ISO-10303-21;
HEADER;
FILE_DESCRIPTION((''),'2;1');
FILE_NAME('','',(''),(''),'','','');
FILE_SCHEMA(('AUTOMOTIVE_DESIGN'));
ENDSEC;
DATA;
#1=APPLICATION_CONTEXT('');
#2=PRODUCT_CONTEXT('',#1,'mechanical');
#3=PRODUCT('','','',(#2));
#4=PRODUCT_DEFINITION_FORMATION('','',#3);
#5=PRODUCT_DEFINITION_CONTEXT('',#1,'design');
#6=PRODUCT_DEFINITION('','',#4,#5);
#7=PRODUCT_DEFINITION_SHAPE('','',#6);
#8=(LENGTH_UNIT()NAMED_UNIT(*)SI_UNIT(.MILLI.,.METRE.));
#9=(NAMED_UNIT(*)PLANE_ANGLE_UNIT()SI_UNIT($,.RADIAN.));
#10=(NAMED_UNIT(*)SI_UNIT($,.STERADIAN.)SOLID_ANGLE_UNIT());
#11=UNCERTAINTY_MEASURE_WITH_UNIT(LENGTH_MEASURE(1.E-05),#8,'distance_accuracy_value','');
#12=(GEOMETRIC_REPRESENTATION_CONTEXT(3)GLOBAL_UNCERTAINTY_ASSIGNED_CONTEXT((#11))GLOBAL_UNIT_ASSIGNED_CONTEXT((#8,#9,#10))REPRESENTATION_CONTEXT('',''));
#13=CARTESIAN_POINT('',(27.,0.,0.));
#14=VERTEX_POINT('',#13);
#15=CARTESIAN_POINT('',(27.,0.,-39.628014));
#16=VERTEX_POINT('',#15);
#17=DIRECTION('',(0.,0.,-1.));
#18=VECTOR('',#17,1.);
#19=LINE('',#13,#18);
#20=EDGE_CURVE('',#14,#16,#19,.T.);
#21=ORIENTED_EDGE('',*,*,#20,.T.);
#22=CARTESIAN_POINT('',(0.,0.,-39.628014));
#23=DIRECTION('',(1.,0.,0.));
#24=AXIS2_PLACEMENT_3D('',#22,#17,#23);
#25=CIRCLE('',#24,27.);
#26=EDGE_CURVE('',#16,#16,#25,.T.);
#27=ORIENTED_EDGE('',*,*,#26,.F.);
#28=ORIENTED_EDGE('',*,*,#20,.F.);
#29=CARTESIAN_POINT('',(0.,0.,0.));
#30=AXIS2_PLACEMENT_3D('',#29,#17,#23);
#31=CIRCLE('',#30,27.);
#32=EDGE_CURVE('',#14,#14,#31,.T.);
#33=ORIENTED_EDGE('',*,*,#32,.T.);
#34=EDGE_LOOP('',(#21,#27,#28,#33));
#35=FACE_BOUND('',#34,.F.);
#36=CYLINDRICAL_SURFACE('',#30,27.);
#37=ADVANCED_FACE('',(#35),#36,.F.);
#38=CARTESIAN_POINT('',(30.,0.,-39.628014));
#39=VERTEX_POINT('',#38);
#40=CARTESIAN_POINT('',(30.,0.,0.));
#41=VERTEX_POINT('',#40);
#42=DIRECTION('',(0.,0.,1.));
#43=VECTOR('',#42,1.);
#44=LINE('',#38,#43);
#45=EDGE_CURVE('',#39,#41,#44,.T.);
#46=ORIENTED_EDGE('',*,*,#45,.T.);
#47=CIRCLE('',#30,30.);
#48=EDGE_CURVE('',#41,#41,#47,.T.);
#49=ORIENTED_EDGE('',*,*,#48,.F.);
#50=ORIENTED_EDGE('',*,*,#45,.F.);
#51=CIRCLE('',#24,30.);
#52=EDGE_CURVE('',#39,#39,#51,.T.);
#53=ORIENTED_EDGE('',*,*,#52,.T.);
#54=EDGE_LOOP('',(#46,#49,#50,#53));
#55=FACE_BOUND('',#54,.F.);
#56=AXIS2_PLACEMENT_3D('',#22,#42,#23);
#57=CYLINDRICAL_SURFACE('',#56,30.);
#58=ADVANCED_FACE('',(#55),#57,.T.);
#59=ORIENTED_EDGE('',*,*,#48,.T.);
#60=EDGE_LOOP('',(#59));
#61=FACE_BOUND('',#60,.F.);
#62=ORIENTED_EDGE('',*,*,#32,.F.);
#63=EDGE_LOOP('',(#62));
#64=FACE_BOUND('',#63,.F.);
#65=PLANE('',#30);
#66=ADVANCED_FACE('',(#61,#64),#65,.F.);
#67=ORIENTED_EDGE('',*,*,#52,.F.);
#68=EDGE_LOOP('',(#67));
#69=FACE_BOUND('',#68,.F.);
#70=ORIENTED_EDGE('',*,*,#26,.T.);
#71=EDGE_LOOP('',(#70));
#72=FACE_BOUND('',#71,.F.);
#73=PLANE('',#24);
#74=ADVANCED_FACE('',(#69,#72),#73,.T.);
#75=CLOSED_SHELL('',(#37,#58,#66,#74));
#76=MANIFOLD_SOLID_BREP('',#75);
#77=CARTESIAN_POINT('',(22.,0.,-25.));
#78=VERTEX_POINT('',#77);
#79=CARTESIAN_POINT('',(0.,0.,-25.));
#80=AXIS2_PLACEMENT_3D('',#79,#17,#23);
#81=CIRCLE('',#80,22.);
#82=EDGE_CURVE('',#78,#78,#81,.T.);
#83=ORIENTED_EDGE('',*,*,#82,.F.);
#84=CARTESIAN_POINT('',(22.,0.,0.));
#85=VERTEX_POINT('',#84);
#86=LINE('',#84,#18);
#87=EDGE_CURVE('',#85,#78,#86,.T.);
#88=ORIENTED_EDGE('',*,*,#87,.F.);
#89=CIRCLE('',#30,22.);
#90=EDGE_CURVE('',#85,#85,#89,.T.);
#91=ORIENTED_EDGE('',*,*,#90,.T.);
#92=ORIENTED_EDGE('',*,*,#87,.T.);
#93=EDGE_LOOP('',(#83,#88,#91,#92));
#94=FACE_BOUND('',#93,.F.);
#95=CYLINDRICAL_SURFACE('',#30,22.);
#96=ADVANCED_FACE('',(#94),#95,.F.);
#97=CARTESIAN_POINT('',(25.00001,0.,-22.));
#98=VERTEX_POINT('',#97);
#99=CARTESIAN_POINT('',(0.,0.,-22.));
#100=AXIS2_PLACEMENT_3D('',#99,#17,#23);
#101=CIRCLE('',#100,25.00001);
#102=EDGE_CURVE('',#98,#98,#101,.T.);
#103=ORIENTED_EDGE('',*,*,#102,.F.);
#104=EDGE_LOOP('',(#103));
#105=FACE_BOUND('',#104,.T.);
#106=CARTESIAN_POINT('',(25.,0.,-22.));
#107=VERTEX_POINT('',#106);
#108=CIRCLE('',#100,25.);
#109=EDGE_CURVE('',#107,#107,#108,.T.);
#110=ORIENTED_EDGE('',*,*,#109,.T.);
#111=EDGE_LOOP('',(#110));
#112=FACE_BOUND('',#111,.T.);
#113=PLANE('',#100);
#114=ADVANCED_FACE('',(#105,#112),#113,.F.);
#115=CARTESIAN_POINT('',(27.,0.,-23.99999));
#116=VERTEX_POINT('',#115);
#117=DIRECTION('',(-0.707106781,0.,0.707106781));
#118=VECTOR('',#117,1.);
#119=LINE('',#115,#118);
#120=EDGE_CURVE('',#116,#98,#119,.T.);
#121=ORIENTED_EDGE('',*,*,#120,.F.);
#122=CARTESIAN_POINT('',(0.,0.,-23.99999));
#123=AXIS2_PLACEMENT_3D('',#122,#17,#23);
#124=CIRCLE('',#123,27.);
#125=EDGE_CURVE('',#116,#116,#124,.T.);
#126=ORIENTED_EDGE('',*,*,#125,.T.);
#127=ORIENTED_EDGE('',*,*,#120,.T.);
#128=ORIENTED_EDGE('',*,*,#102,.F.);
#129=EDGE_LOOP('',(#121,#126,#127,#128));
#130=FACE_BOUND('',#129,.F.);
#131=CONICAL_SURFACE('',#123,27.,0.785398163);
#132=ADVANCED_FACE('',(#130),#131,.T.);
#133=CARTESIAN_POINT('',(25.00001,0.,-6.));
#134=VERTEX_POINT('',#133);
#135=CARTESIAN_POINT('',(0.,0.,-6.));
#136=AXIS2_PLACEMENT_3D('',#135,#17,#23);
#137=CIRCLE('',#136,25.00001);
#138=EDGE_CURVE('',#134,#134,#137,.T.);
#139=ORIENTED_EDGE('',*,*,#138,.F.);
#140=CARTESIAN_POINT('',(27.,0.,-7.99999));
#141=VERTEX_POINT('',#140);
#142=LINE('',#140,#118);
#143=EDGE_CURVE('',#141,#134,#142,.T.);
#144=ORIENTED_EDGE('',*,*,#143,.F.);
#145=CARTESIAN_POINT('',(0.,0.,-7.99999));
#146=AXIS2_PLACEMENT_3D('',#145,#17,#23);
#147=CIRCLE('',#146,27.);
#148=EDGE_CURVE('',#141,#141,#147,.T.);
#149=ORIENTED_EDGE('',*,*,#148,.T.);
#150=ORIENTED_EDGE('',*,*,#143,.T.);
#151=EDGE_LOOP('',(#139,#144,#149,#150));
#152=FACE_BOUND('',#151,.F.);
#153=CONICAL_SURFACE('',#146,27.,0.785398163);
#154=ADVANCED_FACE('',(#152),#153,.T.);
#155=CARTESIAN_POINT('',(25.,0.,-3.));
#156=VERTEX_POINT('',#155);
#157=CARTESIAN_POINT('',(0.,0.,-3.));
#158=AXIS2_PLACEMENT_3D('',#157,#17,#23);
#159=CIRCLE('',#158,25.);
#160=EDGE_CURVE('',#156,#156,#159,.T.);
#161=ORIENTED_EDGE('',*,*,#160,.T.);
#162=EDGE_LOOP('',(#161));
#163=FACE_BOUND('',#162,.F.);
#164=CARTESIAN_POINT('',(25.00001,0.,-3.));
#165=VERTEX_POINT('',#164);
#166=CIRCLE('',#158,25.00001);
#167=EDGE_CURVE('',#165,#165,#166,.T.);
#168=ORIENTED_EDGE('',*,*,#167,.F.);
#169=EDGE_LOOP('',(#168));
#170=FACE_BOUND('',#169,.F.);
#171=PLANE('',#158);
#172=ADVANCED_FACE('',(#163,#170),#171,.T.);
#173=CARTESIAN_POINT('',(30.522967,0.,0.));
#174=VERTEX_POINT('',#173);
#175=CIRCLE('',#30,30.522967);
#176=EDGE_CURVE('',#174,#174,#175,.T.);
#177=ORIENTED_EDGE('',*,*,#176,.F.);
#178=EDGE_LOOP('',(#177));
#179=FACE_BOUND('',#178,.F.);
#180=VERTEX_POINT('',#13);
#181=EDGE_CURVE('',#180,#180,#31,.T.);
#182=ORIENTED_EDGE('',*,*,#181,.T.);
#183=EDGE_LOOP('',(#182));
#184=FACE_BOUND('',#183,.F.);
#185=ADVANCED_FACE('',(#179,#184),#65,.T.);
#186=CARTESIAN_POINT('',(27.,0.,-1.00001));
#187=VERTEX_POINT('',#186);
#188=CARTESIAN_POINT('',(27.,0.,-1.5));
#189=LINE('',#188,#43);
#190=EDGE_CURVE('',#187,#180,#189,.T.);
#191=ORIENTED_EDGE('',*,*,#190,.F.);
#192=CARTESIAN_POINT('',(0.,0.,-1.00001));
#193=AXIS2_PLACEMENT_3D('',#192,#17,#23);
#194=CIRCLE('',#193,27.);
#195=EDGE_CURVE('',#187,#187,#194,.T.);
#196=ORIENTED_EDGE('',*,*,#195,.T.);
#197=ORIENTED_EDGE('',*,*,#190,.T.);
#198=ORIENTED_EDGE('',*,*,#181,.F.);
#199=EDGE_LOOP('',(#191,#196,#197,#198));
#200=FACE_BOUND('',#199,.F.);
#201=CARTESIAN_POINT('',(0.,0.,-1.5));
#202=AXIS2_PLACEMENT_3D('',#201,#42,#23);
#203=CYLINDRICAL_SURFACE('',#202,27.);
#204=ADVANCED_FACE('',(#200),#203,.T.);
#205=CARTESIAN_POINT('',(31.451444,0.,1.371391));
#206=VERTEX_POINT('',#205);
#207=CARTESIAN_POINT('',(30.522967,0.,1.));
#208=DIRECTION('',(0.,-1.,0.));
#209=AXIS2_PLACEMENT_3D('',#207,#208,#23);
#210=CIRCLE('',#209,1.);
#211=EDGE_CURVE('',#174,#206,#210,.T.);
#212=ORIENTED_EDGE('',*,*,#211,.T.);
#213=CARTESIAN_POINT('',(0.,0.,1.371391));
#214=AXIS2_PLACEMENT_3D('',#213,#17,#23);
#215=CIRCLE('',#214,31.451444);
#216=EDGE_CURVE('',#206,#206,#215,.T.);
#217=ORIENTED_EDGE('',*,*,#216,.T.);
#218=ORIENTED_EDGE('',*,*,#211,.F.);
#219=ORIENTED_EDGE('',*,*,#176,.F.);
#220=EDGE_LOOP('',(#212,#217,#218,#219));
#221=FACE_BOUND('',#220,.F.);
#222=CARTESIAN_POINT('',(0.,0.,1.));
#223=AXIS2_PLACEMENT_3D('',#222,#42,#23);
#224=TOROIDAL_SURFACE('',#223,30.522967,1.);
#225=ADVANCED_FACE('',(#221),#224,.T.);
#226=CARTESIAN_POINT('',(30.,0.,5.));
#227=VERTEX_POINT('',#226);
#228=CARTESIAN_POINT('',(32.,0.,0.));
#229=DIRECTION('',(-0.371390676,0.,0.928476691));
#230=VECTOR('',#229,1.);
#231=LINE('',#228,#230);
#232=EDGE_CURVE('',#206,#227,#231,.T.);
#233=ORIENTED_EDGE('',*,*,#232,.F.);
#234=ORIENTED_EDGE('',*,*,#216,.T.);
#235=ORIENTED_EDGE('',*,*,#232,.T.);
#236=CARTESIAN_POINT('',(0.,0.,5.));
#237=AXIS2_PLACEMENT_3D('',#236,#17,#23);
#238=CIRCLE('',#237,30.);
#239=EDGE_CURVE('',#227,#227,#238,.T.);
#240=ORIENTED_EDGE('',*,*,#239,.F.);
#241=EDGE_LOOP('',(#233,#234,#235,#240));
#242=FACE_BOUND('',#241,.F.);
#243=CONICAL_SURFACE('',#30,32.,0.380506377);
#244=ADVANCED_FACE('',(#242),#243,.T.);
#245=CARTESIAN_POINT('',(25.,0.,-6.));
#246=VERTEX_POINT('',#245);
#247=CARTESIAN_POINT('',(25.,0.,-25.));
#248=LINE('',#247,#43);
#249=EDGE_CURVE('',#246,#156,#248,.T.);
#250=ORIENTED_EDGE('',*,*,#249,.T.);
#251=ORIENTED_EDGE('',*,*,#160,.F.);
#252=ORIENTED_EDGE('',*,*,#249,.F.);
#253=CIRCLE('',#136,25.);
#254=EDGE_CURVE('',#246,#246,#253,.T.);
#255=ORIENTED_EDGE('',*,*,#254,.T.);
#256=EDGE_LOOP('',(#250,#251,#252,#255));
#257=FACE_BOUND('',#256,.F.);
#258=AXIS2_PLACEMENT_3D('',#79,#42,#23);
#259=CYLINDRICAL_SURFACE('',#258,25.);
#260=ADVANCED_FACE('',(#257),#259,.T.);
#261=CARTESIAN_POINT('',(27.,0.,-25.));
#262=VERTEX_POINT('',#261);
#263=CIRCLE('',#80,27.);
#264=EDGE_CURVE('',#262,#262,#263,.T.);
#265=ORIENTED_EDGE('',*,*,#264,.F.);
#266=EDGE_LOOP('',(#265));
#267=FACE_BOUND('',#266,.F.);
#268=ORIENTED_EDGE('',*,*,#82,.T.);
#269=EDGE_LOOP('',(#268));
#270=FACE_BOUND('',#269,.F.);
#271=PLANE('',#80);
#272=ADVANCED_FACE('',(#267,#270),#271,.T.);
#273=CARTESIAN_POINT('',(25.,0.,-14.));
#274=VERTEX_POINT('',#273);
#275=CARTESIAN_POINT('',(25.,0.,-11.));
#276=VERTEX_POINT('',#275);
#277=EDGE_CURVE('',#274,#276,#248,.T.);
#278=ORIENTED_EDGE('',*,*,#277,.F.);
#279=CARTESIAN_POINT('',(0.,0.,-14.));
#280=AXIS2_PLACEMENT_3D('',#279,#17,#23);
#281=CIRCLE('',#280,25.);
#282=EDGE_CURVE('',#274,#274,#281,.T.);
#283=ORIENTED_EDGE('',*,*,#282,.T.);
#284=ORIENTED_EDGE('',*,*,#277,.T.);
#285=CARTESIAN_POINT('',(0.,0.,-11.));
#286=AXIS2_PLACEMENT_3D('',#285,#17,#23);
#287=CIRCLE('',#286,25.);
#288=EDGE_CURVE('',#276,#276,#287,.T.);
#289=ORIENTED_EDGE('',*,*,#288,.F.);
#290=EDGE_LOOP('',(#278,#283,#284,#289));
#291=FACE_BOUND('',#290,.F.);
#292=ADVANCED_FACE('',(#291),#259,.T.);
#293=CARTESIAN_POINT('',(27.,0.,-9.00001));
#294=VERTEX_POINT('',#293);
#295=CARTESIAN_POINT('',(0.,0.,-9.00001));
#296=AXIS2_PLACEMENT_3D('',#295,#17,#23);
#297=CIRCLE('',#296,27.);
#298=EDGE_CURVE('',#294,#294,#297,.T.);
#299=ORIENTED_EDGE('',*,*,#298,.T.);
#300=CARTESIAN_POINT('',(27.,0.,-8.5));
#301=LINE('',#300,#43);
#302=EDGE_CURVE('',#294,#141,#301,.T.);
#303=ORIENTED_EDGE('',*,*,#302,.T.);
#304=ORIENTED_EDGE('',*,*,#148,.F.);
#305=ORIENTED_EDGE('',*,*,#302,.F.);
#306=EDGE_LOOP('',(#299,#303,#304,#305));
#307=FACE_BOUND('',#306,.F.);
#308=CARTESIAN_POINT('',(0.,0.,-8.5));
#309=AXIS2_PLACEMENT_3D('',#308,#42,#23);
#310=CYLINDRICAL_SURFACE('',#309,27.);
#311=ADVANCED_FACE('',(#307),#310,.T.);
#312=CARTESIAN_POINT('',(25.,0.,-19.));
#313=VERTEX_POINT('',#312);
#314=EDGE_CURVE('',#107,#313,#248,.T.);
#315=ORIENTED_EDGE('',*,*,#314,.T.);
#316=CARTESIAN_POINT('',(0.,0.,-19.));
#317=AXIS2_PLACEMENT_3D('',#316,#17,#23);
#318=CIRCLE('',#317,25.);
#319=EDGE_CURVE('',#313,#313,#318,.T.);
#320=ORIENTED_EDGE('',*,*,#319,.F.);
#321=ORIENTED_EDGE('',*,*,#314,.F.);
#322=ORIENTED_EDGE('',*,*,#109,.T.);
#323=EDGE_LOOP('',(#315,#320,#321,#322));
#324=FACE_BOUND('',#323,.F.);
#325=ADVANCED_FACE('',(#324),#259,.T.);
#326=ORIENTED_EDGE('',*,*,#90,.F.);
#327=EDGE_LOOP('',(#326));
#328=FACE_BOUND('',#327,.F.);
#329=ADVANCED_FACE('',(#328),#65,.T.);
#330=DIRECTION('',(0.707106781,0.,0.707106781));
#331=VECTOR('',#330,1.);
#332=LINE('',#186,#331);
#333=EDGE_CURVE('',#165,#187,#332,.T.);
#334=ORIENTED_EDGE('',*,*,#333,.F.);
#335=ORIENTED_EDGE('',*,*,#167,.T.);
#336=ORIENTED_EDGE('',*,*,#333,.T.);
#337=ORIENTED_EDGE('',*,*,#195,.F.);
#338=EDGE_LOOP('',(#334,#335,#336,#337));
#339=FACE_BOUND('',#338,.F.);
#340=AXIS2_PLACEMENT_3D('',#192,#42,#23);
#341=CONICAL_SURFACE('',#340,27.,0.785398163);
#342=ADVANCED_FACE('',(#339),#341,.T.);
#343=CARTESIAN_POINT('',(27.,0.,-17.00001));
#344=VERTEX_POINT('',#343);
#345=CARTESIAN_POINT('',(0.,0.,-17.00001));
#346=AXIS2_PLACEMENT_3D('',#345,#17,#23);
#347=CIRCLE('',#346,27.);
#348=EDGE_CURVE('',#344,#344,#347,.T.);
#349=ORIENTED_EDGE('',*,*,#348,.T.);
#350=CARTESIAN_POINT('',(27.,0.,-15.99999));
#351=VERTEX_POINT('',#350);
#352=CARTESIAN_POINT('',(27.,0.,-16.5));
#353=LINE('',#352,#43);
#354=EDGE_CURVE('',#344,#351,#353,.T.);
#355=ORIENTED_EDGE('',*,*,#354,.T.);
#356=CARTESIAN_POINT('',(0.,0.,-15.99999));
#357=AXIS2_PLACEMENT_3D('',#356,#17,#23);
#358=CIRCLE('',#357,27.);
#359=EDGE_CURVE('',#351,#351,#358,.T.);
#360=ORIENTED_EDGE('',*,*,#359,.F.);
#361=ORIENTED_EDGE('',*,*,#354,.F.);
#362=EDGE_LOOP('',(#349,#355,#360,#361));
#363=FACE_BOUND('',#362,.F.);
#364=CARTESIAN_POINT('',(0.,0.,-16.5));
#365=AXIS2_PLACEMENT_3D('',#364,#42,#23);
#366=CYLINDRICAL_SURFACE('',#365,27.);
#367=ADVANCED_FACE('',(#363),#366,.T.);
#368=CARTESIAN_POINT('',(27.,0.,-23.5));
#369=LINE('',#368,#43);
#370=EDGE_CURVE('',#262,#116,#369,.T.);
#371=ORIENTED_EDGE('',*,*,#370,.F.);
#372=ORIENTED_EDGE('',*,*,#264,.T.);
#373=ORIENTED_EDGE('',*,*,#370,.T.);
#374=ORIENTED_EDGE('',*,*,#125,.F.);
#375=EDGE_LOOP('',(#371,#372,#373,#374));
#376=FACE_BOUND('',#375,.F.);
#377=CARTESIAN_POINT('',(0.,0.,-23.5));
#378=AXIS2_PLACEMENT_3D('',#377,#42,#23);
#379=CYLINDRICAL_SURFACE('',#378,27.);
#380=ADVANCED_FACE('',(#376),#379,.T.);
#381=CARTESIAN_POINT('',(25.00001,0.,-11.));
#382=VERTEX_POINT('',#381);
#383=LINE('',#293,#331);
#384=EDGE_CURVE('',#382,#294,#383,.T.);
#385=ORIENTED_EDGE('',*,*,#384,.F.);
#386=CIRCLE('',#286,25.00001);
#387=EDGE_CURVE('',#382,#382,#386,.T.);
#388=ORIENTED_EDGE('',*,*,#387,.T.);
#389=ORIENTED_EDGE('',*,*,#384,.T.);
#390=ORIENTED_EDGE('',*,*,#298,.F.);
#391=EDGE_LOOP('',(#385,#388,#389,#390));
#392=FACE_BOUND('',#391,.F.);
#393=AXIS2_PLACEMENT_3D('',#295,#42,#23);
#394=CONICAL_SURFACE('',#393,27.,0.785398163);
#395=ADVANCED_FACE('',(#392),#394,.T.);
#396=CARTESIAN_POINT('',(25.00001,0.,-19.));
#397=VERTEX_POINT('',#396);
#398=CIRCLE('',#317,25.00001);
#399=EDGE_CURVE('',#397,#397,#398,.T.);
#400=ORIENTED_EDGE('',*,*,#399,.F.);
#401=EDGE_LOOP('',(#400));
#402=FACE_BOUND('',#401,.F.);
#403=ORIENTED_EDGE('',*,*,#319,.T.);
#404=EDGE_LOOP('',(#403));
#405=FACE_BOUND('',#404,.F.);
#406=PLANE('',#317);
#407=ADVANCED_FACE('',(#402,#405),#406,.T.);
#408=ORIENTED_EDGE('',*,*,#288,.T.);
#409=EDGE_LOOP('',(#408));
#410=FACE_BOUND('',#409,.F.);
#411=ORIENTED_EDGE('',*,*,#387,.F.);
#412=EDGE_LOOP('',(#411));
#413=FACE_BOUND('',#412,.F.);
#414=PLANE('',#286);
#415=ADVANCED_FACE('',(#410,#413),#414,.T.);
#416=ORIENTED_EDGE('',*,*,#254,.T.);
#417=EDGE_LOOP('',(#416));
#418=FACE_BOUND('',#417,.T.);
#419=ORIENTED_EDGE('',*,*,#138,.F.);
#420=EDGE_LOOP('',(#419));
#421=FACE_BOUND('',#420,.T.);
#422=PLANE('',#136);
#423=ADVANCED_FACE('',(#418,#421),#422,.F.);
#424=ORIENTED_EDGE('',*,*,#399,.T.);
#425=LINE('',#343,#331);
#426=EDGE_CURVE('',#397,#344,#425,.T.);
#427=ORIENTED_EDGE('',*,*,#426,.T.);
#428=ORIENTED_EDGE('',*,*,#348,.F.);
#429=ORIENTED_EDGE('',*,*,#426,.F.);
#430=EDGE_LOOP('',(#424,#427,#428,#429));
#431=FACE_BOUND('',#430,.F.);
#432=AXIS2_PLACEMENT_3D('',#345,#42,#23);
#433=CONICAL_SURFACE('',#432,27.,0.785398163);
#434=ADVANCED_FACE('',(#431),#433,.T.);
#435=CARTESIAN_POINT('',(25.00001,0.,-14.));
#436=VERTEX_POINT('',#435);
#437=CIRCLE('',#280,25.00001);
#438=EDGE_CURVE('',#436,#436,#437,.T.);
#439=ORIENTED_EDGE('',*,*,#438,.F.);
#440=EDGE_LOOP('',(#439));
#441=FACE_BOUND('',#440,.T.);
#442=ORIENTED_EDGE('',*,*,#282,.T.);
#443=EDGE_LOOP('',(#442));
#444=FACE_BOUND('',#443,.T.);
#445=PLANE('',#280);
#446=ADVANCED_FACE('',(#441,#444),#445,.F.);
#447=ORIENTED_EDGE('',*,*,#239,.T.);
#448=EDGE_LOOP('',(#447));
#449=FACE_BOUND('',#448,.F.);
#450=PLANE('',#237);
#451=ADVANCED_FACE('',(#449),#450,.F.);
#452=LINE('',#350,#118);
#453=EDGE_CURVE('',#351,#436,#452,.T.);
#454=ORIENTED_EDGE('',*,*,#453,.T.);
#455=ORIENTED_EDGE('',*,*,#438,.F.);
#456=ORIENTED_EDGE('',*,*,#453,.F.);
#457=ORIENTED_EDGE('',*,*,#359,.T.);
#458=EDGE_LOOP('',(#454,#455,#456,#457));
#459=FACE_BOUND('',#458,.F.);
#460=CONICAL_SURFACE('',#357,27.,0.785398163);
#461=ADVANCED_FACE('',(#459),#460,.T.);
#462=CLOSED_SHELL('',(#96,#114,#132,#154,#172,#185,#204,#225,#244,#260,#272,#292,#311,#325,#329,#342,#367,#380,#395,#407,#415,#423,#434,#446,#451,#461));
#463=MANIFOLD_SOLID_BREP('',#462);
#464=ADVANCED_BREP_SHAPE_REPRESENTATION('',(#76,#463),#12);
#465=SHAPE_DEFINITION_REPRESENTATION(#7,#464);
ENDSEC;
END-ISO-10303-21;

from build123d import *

# Parameters (mm, degrees)
F0_W    = 2
F0_H    = 5
F0_H_2  = 3
F3_SIZE = 1.99999
F5_R    = 1


# Not quite as in the source:
# - a fillet or chamfer that OpenCascade refuses, or shapes differently, is made with other operations: its cross-section is extruded or revolved along the edge and cut away or added
# - a fillet or chamfer is up to 0.001 mm smaller than in the source, because OpenCascade refuses the exact size


with BuildPart() as f1:
    # F0 (on Front) → F1 (revolve)
    with BuildSketch(Plane.XZ):
        Polygon((30, 0), (27, 0), (27, -3), (27, -6), (27, -11), (27, -14), (27, -19), (27, -22), (27, -25), (27, -39.6280139685), (30, -39.6280139685), align=None)
    revolve(axis=Axis((0, 0, -12.5), (0, 0, -1)))


with BuildPart() as f2:
    # F0 (on Front) → F2 (revolve)
    with BuildSketch(Plane.XZ):
        Polygon((0, 5), (0, 0), (22, 0), (25, 0), (27, 0), (30, 0), (30, 5), align=None)
        with Locations((31, 2.5)):
            Rectangle(F0_W, F0_H)
        Polygon((25, 0), (22, 0), (22, -25), (25, -25), (25, -22), (25, -19), (25, -14), (25, -11), (25, -6), (25, -3), align=None)
        with Locations((26, -1.5)):
            Rectangle(F0_W, F0_H_2)
        with Locations((26, -8.5)):
            Rectangle(F0_W, F0_H)
        with Locations((26, -16.5)):
            Rectangle(F0_W, F0_H)
        with Locations((26, -23.5)):
            Rectangle(F0_W, F0_H_2)
    revolve(axis=Axis((0, 0, -12.5), (0, 0, -1)))

    # F3 (size 2 in the source; OpenCascade refuses exactly that, so slightly less here)
    f3_edges = [f2.edges().sort_by_distance(p)[0] for p in [
        (-27, 0, -22),
        (-27, 0, -19),
        (-27, 0, -14),
        (-27, 0, -6),
        (-27, 0, -11),
        (-27, 0, -3),
    ]]
    chamfer(f3_edges, length=F3_SIZE)

    # F4: chamfer of 2 x 5 on 1 edges, made by hand

    # F4_s1 → F4_t2 (revolve, cut)
    with BuildSketch(Plane.XZ):
        Polygon((32, 0), (30, 5), (32, 5), align=None)
    revolve(axis=Axis((0, 0, 5), (0, 0, -1)), mode=Mode.SUBTRACT)

    # F5
    f5_edges = [f2.edges().sort_by_distance(p)[0] for p in [
        (-32, 0, 0),
    ]]
    fillet(f5_edges, radius=F5_R)


solid = Compound([f1.part, f2.part])
